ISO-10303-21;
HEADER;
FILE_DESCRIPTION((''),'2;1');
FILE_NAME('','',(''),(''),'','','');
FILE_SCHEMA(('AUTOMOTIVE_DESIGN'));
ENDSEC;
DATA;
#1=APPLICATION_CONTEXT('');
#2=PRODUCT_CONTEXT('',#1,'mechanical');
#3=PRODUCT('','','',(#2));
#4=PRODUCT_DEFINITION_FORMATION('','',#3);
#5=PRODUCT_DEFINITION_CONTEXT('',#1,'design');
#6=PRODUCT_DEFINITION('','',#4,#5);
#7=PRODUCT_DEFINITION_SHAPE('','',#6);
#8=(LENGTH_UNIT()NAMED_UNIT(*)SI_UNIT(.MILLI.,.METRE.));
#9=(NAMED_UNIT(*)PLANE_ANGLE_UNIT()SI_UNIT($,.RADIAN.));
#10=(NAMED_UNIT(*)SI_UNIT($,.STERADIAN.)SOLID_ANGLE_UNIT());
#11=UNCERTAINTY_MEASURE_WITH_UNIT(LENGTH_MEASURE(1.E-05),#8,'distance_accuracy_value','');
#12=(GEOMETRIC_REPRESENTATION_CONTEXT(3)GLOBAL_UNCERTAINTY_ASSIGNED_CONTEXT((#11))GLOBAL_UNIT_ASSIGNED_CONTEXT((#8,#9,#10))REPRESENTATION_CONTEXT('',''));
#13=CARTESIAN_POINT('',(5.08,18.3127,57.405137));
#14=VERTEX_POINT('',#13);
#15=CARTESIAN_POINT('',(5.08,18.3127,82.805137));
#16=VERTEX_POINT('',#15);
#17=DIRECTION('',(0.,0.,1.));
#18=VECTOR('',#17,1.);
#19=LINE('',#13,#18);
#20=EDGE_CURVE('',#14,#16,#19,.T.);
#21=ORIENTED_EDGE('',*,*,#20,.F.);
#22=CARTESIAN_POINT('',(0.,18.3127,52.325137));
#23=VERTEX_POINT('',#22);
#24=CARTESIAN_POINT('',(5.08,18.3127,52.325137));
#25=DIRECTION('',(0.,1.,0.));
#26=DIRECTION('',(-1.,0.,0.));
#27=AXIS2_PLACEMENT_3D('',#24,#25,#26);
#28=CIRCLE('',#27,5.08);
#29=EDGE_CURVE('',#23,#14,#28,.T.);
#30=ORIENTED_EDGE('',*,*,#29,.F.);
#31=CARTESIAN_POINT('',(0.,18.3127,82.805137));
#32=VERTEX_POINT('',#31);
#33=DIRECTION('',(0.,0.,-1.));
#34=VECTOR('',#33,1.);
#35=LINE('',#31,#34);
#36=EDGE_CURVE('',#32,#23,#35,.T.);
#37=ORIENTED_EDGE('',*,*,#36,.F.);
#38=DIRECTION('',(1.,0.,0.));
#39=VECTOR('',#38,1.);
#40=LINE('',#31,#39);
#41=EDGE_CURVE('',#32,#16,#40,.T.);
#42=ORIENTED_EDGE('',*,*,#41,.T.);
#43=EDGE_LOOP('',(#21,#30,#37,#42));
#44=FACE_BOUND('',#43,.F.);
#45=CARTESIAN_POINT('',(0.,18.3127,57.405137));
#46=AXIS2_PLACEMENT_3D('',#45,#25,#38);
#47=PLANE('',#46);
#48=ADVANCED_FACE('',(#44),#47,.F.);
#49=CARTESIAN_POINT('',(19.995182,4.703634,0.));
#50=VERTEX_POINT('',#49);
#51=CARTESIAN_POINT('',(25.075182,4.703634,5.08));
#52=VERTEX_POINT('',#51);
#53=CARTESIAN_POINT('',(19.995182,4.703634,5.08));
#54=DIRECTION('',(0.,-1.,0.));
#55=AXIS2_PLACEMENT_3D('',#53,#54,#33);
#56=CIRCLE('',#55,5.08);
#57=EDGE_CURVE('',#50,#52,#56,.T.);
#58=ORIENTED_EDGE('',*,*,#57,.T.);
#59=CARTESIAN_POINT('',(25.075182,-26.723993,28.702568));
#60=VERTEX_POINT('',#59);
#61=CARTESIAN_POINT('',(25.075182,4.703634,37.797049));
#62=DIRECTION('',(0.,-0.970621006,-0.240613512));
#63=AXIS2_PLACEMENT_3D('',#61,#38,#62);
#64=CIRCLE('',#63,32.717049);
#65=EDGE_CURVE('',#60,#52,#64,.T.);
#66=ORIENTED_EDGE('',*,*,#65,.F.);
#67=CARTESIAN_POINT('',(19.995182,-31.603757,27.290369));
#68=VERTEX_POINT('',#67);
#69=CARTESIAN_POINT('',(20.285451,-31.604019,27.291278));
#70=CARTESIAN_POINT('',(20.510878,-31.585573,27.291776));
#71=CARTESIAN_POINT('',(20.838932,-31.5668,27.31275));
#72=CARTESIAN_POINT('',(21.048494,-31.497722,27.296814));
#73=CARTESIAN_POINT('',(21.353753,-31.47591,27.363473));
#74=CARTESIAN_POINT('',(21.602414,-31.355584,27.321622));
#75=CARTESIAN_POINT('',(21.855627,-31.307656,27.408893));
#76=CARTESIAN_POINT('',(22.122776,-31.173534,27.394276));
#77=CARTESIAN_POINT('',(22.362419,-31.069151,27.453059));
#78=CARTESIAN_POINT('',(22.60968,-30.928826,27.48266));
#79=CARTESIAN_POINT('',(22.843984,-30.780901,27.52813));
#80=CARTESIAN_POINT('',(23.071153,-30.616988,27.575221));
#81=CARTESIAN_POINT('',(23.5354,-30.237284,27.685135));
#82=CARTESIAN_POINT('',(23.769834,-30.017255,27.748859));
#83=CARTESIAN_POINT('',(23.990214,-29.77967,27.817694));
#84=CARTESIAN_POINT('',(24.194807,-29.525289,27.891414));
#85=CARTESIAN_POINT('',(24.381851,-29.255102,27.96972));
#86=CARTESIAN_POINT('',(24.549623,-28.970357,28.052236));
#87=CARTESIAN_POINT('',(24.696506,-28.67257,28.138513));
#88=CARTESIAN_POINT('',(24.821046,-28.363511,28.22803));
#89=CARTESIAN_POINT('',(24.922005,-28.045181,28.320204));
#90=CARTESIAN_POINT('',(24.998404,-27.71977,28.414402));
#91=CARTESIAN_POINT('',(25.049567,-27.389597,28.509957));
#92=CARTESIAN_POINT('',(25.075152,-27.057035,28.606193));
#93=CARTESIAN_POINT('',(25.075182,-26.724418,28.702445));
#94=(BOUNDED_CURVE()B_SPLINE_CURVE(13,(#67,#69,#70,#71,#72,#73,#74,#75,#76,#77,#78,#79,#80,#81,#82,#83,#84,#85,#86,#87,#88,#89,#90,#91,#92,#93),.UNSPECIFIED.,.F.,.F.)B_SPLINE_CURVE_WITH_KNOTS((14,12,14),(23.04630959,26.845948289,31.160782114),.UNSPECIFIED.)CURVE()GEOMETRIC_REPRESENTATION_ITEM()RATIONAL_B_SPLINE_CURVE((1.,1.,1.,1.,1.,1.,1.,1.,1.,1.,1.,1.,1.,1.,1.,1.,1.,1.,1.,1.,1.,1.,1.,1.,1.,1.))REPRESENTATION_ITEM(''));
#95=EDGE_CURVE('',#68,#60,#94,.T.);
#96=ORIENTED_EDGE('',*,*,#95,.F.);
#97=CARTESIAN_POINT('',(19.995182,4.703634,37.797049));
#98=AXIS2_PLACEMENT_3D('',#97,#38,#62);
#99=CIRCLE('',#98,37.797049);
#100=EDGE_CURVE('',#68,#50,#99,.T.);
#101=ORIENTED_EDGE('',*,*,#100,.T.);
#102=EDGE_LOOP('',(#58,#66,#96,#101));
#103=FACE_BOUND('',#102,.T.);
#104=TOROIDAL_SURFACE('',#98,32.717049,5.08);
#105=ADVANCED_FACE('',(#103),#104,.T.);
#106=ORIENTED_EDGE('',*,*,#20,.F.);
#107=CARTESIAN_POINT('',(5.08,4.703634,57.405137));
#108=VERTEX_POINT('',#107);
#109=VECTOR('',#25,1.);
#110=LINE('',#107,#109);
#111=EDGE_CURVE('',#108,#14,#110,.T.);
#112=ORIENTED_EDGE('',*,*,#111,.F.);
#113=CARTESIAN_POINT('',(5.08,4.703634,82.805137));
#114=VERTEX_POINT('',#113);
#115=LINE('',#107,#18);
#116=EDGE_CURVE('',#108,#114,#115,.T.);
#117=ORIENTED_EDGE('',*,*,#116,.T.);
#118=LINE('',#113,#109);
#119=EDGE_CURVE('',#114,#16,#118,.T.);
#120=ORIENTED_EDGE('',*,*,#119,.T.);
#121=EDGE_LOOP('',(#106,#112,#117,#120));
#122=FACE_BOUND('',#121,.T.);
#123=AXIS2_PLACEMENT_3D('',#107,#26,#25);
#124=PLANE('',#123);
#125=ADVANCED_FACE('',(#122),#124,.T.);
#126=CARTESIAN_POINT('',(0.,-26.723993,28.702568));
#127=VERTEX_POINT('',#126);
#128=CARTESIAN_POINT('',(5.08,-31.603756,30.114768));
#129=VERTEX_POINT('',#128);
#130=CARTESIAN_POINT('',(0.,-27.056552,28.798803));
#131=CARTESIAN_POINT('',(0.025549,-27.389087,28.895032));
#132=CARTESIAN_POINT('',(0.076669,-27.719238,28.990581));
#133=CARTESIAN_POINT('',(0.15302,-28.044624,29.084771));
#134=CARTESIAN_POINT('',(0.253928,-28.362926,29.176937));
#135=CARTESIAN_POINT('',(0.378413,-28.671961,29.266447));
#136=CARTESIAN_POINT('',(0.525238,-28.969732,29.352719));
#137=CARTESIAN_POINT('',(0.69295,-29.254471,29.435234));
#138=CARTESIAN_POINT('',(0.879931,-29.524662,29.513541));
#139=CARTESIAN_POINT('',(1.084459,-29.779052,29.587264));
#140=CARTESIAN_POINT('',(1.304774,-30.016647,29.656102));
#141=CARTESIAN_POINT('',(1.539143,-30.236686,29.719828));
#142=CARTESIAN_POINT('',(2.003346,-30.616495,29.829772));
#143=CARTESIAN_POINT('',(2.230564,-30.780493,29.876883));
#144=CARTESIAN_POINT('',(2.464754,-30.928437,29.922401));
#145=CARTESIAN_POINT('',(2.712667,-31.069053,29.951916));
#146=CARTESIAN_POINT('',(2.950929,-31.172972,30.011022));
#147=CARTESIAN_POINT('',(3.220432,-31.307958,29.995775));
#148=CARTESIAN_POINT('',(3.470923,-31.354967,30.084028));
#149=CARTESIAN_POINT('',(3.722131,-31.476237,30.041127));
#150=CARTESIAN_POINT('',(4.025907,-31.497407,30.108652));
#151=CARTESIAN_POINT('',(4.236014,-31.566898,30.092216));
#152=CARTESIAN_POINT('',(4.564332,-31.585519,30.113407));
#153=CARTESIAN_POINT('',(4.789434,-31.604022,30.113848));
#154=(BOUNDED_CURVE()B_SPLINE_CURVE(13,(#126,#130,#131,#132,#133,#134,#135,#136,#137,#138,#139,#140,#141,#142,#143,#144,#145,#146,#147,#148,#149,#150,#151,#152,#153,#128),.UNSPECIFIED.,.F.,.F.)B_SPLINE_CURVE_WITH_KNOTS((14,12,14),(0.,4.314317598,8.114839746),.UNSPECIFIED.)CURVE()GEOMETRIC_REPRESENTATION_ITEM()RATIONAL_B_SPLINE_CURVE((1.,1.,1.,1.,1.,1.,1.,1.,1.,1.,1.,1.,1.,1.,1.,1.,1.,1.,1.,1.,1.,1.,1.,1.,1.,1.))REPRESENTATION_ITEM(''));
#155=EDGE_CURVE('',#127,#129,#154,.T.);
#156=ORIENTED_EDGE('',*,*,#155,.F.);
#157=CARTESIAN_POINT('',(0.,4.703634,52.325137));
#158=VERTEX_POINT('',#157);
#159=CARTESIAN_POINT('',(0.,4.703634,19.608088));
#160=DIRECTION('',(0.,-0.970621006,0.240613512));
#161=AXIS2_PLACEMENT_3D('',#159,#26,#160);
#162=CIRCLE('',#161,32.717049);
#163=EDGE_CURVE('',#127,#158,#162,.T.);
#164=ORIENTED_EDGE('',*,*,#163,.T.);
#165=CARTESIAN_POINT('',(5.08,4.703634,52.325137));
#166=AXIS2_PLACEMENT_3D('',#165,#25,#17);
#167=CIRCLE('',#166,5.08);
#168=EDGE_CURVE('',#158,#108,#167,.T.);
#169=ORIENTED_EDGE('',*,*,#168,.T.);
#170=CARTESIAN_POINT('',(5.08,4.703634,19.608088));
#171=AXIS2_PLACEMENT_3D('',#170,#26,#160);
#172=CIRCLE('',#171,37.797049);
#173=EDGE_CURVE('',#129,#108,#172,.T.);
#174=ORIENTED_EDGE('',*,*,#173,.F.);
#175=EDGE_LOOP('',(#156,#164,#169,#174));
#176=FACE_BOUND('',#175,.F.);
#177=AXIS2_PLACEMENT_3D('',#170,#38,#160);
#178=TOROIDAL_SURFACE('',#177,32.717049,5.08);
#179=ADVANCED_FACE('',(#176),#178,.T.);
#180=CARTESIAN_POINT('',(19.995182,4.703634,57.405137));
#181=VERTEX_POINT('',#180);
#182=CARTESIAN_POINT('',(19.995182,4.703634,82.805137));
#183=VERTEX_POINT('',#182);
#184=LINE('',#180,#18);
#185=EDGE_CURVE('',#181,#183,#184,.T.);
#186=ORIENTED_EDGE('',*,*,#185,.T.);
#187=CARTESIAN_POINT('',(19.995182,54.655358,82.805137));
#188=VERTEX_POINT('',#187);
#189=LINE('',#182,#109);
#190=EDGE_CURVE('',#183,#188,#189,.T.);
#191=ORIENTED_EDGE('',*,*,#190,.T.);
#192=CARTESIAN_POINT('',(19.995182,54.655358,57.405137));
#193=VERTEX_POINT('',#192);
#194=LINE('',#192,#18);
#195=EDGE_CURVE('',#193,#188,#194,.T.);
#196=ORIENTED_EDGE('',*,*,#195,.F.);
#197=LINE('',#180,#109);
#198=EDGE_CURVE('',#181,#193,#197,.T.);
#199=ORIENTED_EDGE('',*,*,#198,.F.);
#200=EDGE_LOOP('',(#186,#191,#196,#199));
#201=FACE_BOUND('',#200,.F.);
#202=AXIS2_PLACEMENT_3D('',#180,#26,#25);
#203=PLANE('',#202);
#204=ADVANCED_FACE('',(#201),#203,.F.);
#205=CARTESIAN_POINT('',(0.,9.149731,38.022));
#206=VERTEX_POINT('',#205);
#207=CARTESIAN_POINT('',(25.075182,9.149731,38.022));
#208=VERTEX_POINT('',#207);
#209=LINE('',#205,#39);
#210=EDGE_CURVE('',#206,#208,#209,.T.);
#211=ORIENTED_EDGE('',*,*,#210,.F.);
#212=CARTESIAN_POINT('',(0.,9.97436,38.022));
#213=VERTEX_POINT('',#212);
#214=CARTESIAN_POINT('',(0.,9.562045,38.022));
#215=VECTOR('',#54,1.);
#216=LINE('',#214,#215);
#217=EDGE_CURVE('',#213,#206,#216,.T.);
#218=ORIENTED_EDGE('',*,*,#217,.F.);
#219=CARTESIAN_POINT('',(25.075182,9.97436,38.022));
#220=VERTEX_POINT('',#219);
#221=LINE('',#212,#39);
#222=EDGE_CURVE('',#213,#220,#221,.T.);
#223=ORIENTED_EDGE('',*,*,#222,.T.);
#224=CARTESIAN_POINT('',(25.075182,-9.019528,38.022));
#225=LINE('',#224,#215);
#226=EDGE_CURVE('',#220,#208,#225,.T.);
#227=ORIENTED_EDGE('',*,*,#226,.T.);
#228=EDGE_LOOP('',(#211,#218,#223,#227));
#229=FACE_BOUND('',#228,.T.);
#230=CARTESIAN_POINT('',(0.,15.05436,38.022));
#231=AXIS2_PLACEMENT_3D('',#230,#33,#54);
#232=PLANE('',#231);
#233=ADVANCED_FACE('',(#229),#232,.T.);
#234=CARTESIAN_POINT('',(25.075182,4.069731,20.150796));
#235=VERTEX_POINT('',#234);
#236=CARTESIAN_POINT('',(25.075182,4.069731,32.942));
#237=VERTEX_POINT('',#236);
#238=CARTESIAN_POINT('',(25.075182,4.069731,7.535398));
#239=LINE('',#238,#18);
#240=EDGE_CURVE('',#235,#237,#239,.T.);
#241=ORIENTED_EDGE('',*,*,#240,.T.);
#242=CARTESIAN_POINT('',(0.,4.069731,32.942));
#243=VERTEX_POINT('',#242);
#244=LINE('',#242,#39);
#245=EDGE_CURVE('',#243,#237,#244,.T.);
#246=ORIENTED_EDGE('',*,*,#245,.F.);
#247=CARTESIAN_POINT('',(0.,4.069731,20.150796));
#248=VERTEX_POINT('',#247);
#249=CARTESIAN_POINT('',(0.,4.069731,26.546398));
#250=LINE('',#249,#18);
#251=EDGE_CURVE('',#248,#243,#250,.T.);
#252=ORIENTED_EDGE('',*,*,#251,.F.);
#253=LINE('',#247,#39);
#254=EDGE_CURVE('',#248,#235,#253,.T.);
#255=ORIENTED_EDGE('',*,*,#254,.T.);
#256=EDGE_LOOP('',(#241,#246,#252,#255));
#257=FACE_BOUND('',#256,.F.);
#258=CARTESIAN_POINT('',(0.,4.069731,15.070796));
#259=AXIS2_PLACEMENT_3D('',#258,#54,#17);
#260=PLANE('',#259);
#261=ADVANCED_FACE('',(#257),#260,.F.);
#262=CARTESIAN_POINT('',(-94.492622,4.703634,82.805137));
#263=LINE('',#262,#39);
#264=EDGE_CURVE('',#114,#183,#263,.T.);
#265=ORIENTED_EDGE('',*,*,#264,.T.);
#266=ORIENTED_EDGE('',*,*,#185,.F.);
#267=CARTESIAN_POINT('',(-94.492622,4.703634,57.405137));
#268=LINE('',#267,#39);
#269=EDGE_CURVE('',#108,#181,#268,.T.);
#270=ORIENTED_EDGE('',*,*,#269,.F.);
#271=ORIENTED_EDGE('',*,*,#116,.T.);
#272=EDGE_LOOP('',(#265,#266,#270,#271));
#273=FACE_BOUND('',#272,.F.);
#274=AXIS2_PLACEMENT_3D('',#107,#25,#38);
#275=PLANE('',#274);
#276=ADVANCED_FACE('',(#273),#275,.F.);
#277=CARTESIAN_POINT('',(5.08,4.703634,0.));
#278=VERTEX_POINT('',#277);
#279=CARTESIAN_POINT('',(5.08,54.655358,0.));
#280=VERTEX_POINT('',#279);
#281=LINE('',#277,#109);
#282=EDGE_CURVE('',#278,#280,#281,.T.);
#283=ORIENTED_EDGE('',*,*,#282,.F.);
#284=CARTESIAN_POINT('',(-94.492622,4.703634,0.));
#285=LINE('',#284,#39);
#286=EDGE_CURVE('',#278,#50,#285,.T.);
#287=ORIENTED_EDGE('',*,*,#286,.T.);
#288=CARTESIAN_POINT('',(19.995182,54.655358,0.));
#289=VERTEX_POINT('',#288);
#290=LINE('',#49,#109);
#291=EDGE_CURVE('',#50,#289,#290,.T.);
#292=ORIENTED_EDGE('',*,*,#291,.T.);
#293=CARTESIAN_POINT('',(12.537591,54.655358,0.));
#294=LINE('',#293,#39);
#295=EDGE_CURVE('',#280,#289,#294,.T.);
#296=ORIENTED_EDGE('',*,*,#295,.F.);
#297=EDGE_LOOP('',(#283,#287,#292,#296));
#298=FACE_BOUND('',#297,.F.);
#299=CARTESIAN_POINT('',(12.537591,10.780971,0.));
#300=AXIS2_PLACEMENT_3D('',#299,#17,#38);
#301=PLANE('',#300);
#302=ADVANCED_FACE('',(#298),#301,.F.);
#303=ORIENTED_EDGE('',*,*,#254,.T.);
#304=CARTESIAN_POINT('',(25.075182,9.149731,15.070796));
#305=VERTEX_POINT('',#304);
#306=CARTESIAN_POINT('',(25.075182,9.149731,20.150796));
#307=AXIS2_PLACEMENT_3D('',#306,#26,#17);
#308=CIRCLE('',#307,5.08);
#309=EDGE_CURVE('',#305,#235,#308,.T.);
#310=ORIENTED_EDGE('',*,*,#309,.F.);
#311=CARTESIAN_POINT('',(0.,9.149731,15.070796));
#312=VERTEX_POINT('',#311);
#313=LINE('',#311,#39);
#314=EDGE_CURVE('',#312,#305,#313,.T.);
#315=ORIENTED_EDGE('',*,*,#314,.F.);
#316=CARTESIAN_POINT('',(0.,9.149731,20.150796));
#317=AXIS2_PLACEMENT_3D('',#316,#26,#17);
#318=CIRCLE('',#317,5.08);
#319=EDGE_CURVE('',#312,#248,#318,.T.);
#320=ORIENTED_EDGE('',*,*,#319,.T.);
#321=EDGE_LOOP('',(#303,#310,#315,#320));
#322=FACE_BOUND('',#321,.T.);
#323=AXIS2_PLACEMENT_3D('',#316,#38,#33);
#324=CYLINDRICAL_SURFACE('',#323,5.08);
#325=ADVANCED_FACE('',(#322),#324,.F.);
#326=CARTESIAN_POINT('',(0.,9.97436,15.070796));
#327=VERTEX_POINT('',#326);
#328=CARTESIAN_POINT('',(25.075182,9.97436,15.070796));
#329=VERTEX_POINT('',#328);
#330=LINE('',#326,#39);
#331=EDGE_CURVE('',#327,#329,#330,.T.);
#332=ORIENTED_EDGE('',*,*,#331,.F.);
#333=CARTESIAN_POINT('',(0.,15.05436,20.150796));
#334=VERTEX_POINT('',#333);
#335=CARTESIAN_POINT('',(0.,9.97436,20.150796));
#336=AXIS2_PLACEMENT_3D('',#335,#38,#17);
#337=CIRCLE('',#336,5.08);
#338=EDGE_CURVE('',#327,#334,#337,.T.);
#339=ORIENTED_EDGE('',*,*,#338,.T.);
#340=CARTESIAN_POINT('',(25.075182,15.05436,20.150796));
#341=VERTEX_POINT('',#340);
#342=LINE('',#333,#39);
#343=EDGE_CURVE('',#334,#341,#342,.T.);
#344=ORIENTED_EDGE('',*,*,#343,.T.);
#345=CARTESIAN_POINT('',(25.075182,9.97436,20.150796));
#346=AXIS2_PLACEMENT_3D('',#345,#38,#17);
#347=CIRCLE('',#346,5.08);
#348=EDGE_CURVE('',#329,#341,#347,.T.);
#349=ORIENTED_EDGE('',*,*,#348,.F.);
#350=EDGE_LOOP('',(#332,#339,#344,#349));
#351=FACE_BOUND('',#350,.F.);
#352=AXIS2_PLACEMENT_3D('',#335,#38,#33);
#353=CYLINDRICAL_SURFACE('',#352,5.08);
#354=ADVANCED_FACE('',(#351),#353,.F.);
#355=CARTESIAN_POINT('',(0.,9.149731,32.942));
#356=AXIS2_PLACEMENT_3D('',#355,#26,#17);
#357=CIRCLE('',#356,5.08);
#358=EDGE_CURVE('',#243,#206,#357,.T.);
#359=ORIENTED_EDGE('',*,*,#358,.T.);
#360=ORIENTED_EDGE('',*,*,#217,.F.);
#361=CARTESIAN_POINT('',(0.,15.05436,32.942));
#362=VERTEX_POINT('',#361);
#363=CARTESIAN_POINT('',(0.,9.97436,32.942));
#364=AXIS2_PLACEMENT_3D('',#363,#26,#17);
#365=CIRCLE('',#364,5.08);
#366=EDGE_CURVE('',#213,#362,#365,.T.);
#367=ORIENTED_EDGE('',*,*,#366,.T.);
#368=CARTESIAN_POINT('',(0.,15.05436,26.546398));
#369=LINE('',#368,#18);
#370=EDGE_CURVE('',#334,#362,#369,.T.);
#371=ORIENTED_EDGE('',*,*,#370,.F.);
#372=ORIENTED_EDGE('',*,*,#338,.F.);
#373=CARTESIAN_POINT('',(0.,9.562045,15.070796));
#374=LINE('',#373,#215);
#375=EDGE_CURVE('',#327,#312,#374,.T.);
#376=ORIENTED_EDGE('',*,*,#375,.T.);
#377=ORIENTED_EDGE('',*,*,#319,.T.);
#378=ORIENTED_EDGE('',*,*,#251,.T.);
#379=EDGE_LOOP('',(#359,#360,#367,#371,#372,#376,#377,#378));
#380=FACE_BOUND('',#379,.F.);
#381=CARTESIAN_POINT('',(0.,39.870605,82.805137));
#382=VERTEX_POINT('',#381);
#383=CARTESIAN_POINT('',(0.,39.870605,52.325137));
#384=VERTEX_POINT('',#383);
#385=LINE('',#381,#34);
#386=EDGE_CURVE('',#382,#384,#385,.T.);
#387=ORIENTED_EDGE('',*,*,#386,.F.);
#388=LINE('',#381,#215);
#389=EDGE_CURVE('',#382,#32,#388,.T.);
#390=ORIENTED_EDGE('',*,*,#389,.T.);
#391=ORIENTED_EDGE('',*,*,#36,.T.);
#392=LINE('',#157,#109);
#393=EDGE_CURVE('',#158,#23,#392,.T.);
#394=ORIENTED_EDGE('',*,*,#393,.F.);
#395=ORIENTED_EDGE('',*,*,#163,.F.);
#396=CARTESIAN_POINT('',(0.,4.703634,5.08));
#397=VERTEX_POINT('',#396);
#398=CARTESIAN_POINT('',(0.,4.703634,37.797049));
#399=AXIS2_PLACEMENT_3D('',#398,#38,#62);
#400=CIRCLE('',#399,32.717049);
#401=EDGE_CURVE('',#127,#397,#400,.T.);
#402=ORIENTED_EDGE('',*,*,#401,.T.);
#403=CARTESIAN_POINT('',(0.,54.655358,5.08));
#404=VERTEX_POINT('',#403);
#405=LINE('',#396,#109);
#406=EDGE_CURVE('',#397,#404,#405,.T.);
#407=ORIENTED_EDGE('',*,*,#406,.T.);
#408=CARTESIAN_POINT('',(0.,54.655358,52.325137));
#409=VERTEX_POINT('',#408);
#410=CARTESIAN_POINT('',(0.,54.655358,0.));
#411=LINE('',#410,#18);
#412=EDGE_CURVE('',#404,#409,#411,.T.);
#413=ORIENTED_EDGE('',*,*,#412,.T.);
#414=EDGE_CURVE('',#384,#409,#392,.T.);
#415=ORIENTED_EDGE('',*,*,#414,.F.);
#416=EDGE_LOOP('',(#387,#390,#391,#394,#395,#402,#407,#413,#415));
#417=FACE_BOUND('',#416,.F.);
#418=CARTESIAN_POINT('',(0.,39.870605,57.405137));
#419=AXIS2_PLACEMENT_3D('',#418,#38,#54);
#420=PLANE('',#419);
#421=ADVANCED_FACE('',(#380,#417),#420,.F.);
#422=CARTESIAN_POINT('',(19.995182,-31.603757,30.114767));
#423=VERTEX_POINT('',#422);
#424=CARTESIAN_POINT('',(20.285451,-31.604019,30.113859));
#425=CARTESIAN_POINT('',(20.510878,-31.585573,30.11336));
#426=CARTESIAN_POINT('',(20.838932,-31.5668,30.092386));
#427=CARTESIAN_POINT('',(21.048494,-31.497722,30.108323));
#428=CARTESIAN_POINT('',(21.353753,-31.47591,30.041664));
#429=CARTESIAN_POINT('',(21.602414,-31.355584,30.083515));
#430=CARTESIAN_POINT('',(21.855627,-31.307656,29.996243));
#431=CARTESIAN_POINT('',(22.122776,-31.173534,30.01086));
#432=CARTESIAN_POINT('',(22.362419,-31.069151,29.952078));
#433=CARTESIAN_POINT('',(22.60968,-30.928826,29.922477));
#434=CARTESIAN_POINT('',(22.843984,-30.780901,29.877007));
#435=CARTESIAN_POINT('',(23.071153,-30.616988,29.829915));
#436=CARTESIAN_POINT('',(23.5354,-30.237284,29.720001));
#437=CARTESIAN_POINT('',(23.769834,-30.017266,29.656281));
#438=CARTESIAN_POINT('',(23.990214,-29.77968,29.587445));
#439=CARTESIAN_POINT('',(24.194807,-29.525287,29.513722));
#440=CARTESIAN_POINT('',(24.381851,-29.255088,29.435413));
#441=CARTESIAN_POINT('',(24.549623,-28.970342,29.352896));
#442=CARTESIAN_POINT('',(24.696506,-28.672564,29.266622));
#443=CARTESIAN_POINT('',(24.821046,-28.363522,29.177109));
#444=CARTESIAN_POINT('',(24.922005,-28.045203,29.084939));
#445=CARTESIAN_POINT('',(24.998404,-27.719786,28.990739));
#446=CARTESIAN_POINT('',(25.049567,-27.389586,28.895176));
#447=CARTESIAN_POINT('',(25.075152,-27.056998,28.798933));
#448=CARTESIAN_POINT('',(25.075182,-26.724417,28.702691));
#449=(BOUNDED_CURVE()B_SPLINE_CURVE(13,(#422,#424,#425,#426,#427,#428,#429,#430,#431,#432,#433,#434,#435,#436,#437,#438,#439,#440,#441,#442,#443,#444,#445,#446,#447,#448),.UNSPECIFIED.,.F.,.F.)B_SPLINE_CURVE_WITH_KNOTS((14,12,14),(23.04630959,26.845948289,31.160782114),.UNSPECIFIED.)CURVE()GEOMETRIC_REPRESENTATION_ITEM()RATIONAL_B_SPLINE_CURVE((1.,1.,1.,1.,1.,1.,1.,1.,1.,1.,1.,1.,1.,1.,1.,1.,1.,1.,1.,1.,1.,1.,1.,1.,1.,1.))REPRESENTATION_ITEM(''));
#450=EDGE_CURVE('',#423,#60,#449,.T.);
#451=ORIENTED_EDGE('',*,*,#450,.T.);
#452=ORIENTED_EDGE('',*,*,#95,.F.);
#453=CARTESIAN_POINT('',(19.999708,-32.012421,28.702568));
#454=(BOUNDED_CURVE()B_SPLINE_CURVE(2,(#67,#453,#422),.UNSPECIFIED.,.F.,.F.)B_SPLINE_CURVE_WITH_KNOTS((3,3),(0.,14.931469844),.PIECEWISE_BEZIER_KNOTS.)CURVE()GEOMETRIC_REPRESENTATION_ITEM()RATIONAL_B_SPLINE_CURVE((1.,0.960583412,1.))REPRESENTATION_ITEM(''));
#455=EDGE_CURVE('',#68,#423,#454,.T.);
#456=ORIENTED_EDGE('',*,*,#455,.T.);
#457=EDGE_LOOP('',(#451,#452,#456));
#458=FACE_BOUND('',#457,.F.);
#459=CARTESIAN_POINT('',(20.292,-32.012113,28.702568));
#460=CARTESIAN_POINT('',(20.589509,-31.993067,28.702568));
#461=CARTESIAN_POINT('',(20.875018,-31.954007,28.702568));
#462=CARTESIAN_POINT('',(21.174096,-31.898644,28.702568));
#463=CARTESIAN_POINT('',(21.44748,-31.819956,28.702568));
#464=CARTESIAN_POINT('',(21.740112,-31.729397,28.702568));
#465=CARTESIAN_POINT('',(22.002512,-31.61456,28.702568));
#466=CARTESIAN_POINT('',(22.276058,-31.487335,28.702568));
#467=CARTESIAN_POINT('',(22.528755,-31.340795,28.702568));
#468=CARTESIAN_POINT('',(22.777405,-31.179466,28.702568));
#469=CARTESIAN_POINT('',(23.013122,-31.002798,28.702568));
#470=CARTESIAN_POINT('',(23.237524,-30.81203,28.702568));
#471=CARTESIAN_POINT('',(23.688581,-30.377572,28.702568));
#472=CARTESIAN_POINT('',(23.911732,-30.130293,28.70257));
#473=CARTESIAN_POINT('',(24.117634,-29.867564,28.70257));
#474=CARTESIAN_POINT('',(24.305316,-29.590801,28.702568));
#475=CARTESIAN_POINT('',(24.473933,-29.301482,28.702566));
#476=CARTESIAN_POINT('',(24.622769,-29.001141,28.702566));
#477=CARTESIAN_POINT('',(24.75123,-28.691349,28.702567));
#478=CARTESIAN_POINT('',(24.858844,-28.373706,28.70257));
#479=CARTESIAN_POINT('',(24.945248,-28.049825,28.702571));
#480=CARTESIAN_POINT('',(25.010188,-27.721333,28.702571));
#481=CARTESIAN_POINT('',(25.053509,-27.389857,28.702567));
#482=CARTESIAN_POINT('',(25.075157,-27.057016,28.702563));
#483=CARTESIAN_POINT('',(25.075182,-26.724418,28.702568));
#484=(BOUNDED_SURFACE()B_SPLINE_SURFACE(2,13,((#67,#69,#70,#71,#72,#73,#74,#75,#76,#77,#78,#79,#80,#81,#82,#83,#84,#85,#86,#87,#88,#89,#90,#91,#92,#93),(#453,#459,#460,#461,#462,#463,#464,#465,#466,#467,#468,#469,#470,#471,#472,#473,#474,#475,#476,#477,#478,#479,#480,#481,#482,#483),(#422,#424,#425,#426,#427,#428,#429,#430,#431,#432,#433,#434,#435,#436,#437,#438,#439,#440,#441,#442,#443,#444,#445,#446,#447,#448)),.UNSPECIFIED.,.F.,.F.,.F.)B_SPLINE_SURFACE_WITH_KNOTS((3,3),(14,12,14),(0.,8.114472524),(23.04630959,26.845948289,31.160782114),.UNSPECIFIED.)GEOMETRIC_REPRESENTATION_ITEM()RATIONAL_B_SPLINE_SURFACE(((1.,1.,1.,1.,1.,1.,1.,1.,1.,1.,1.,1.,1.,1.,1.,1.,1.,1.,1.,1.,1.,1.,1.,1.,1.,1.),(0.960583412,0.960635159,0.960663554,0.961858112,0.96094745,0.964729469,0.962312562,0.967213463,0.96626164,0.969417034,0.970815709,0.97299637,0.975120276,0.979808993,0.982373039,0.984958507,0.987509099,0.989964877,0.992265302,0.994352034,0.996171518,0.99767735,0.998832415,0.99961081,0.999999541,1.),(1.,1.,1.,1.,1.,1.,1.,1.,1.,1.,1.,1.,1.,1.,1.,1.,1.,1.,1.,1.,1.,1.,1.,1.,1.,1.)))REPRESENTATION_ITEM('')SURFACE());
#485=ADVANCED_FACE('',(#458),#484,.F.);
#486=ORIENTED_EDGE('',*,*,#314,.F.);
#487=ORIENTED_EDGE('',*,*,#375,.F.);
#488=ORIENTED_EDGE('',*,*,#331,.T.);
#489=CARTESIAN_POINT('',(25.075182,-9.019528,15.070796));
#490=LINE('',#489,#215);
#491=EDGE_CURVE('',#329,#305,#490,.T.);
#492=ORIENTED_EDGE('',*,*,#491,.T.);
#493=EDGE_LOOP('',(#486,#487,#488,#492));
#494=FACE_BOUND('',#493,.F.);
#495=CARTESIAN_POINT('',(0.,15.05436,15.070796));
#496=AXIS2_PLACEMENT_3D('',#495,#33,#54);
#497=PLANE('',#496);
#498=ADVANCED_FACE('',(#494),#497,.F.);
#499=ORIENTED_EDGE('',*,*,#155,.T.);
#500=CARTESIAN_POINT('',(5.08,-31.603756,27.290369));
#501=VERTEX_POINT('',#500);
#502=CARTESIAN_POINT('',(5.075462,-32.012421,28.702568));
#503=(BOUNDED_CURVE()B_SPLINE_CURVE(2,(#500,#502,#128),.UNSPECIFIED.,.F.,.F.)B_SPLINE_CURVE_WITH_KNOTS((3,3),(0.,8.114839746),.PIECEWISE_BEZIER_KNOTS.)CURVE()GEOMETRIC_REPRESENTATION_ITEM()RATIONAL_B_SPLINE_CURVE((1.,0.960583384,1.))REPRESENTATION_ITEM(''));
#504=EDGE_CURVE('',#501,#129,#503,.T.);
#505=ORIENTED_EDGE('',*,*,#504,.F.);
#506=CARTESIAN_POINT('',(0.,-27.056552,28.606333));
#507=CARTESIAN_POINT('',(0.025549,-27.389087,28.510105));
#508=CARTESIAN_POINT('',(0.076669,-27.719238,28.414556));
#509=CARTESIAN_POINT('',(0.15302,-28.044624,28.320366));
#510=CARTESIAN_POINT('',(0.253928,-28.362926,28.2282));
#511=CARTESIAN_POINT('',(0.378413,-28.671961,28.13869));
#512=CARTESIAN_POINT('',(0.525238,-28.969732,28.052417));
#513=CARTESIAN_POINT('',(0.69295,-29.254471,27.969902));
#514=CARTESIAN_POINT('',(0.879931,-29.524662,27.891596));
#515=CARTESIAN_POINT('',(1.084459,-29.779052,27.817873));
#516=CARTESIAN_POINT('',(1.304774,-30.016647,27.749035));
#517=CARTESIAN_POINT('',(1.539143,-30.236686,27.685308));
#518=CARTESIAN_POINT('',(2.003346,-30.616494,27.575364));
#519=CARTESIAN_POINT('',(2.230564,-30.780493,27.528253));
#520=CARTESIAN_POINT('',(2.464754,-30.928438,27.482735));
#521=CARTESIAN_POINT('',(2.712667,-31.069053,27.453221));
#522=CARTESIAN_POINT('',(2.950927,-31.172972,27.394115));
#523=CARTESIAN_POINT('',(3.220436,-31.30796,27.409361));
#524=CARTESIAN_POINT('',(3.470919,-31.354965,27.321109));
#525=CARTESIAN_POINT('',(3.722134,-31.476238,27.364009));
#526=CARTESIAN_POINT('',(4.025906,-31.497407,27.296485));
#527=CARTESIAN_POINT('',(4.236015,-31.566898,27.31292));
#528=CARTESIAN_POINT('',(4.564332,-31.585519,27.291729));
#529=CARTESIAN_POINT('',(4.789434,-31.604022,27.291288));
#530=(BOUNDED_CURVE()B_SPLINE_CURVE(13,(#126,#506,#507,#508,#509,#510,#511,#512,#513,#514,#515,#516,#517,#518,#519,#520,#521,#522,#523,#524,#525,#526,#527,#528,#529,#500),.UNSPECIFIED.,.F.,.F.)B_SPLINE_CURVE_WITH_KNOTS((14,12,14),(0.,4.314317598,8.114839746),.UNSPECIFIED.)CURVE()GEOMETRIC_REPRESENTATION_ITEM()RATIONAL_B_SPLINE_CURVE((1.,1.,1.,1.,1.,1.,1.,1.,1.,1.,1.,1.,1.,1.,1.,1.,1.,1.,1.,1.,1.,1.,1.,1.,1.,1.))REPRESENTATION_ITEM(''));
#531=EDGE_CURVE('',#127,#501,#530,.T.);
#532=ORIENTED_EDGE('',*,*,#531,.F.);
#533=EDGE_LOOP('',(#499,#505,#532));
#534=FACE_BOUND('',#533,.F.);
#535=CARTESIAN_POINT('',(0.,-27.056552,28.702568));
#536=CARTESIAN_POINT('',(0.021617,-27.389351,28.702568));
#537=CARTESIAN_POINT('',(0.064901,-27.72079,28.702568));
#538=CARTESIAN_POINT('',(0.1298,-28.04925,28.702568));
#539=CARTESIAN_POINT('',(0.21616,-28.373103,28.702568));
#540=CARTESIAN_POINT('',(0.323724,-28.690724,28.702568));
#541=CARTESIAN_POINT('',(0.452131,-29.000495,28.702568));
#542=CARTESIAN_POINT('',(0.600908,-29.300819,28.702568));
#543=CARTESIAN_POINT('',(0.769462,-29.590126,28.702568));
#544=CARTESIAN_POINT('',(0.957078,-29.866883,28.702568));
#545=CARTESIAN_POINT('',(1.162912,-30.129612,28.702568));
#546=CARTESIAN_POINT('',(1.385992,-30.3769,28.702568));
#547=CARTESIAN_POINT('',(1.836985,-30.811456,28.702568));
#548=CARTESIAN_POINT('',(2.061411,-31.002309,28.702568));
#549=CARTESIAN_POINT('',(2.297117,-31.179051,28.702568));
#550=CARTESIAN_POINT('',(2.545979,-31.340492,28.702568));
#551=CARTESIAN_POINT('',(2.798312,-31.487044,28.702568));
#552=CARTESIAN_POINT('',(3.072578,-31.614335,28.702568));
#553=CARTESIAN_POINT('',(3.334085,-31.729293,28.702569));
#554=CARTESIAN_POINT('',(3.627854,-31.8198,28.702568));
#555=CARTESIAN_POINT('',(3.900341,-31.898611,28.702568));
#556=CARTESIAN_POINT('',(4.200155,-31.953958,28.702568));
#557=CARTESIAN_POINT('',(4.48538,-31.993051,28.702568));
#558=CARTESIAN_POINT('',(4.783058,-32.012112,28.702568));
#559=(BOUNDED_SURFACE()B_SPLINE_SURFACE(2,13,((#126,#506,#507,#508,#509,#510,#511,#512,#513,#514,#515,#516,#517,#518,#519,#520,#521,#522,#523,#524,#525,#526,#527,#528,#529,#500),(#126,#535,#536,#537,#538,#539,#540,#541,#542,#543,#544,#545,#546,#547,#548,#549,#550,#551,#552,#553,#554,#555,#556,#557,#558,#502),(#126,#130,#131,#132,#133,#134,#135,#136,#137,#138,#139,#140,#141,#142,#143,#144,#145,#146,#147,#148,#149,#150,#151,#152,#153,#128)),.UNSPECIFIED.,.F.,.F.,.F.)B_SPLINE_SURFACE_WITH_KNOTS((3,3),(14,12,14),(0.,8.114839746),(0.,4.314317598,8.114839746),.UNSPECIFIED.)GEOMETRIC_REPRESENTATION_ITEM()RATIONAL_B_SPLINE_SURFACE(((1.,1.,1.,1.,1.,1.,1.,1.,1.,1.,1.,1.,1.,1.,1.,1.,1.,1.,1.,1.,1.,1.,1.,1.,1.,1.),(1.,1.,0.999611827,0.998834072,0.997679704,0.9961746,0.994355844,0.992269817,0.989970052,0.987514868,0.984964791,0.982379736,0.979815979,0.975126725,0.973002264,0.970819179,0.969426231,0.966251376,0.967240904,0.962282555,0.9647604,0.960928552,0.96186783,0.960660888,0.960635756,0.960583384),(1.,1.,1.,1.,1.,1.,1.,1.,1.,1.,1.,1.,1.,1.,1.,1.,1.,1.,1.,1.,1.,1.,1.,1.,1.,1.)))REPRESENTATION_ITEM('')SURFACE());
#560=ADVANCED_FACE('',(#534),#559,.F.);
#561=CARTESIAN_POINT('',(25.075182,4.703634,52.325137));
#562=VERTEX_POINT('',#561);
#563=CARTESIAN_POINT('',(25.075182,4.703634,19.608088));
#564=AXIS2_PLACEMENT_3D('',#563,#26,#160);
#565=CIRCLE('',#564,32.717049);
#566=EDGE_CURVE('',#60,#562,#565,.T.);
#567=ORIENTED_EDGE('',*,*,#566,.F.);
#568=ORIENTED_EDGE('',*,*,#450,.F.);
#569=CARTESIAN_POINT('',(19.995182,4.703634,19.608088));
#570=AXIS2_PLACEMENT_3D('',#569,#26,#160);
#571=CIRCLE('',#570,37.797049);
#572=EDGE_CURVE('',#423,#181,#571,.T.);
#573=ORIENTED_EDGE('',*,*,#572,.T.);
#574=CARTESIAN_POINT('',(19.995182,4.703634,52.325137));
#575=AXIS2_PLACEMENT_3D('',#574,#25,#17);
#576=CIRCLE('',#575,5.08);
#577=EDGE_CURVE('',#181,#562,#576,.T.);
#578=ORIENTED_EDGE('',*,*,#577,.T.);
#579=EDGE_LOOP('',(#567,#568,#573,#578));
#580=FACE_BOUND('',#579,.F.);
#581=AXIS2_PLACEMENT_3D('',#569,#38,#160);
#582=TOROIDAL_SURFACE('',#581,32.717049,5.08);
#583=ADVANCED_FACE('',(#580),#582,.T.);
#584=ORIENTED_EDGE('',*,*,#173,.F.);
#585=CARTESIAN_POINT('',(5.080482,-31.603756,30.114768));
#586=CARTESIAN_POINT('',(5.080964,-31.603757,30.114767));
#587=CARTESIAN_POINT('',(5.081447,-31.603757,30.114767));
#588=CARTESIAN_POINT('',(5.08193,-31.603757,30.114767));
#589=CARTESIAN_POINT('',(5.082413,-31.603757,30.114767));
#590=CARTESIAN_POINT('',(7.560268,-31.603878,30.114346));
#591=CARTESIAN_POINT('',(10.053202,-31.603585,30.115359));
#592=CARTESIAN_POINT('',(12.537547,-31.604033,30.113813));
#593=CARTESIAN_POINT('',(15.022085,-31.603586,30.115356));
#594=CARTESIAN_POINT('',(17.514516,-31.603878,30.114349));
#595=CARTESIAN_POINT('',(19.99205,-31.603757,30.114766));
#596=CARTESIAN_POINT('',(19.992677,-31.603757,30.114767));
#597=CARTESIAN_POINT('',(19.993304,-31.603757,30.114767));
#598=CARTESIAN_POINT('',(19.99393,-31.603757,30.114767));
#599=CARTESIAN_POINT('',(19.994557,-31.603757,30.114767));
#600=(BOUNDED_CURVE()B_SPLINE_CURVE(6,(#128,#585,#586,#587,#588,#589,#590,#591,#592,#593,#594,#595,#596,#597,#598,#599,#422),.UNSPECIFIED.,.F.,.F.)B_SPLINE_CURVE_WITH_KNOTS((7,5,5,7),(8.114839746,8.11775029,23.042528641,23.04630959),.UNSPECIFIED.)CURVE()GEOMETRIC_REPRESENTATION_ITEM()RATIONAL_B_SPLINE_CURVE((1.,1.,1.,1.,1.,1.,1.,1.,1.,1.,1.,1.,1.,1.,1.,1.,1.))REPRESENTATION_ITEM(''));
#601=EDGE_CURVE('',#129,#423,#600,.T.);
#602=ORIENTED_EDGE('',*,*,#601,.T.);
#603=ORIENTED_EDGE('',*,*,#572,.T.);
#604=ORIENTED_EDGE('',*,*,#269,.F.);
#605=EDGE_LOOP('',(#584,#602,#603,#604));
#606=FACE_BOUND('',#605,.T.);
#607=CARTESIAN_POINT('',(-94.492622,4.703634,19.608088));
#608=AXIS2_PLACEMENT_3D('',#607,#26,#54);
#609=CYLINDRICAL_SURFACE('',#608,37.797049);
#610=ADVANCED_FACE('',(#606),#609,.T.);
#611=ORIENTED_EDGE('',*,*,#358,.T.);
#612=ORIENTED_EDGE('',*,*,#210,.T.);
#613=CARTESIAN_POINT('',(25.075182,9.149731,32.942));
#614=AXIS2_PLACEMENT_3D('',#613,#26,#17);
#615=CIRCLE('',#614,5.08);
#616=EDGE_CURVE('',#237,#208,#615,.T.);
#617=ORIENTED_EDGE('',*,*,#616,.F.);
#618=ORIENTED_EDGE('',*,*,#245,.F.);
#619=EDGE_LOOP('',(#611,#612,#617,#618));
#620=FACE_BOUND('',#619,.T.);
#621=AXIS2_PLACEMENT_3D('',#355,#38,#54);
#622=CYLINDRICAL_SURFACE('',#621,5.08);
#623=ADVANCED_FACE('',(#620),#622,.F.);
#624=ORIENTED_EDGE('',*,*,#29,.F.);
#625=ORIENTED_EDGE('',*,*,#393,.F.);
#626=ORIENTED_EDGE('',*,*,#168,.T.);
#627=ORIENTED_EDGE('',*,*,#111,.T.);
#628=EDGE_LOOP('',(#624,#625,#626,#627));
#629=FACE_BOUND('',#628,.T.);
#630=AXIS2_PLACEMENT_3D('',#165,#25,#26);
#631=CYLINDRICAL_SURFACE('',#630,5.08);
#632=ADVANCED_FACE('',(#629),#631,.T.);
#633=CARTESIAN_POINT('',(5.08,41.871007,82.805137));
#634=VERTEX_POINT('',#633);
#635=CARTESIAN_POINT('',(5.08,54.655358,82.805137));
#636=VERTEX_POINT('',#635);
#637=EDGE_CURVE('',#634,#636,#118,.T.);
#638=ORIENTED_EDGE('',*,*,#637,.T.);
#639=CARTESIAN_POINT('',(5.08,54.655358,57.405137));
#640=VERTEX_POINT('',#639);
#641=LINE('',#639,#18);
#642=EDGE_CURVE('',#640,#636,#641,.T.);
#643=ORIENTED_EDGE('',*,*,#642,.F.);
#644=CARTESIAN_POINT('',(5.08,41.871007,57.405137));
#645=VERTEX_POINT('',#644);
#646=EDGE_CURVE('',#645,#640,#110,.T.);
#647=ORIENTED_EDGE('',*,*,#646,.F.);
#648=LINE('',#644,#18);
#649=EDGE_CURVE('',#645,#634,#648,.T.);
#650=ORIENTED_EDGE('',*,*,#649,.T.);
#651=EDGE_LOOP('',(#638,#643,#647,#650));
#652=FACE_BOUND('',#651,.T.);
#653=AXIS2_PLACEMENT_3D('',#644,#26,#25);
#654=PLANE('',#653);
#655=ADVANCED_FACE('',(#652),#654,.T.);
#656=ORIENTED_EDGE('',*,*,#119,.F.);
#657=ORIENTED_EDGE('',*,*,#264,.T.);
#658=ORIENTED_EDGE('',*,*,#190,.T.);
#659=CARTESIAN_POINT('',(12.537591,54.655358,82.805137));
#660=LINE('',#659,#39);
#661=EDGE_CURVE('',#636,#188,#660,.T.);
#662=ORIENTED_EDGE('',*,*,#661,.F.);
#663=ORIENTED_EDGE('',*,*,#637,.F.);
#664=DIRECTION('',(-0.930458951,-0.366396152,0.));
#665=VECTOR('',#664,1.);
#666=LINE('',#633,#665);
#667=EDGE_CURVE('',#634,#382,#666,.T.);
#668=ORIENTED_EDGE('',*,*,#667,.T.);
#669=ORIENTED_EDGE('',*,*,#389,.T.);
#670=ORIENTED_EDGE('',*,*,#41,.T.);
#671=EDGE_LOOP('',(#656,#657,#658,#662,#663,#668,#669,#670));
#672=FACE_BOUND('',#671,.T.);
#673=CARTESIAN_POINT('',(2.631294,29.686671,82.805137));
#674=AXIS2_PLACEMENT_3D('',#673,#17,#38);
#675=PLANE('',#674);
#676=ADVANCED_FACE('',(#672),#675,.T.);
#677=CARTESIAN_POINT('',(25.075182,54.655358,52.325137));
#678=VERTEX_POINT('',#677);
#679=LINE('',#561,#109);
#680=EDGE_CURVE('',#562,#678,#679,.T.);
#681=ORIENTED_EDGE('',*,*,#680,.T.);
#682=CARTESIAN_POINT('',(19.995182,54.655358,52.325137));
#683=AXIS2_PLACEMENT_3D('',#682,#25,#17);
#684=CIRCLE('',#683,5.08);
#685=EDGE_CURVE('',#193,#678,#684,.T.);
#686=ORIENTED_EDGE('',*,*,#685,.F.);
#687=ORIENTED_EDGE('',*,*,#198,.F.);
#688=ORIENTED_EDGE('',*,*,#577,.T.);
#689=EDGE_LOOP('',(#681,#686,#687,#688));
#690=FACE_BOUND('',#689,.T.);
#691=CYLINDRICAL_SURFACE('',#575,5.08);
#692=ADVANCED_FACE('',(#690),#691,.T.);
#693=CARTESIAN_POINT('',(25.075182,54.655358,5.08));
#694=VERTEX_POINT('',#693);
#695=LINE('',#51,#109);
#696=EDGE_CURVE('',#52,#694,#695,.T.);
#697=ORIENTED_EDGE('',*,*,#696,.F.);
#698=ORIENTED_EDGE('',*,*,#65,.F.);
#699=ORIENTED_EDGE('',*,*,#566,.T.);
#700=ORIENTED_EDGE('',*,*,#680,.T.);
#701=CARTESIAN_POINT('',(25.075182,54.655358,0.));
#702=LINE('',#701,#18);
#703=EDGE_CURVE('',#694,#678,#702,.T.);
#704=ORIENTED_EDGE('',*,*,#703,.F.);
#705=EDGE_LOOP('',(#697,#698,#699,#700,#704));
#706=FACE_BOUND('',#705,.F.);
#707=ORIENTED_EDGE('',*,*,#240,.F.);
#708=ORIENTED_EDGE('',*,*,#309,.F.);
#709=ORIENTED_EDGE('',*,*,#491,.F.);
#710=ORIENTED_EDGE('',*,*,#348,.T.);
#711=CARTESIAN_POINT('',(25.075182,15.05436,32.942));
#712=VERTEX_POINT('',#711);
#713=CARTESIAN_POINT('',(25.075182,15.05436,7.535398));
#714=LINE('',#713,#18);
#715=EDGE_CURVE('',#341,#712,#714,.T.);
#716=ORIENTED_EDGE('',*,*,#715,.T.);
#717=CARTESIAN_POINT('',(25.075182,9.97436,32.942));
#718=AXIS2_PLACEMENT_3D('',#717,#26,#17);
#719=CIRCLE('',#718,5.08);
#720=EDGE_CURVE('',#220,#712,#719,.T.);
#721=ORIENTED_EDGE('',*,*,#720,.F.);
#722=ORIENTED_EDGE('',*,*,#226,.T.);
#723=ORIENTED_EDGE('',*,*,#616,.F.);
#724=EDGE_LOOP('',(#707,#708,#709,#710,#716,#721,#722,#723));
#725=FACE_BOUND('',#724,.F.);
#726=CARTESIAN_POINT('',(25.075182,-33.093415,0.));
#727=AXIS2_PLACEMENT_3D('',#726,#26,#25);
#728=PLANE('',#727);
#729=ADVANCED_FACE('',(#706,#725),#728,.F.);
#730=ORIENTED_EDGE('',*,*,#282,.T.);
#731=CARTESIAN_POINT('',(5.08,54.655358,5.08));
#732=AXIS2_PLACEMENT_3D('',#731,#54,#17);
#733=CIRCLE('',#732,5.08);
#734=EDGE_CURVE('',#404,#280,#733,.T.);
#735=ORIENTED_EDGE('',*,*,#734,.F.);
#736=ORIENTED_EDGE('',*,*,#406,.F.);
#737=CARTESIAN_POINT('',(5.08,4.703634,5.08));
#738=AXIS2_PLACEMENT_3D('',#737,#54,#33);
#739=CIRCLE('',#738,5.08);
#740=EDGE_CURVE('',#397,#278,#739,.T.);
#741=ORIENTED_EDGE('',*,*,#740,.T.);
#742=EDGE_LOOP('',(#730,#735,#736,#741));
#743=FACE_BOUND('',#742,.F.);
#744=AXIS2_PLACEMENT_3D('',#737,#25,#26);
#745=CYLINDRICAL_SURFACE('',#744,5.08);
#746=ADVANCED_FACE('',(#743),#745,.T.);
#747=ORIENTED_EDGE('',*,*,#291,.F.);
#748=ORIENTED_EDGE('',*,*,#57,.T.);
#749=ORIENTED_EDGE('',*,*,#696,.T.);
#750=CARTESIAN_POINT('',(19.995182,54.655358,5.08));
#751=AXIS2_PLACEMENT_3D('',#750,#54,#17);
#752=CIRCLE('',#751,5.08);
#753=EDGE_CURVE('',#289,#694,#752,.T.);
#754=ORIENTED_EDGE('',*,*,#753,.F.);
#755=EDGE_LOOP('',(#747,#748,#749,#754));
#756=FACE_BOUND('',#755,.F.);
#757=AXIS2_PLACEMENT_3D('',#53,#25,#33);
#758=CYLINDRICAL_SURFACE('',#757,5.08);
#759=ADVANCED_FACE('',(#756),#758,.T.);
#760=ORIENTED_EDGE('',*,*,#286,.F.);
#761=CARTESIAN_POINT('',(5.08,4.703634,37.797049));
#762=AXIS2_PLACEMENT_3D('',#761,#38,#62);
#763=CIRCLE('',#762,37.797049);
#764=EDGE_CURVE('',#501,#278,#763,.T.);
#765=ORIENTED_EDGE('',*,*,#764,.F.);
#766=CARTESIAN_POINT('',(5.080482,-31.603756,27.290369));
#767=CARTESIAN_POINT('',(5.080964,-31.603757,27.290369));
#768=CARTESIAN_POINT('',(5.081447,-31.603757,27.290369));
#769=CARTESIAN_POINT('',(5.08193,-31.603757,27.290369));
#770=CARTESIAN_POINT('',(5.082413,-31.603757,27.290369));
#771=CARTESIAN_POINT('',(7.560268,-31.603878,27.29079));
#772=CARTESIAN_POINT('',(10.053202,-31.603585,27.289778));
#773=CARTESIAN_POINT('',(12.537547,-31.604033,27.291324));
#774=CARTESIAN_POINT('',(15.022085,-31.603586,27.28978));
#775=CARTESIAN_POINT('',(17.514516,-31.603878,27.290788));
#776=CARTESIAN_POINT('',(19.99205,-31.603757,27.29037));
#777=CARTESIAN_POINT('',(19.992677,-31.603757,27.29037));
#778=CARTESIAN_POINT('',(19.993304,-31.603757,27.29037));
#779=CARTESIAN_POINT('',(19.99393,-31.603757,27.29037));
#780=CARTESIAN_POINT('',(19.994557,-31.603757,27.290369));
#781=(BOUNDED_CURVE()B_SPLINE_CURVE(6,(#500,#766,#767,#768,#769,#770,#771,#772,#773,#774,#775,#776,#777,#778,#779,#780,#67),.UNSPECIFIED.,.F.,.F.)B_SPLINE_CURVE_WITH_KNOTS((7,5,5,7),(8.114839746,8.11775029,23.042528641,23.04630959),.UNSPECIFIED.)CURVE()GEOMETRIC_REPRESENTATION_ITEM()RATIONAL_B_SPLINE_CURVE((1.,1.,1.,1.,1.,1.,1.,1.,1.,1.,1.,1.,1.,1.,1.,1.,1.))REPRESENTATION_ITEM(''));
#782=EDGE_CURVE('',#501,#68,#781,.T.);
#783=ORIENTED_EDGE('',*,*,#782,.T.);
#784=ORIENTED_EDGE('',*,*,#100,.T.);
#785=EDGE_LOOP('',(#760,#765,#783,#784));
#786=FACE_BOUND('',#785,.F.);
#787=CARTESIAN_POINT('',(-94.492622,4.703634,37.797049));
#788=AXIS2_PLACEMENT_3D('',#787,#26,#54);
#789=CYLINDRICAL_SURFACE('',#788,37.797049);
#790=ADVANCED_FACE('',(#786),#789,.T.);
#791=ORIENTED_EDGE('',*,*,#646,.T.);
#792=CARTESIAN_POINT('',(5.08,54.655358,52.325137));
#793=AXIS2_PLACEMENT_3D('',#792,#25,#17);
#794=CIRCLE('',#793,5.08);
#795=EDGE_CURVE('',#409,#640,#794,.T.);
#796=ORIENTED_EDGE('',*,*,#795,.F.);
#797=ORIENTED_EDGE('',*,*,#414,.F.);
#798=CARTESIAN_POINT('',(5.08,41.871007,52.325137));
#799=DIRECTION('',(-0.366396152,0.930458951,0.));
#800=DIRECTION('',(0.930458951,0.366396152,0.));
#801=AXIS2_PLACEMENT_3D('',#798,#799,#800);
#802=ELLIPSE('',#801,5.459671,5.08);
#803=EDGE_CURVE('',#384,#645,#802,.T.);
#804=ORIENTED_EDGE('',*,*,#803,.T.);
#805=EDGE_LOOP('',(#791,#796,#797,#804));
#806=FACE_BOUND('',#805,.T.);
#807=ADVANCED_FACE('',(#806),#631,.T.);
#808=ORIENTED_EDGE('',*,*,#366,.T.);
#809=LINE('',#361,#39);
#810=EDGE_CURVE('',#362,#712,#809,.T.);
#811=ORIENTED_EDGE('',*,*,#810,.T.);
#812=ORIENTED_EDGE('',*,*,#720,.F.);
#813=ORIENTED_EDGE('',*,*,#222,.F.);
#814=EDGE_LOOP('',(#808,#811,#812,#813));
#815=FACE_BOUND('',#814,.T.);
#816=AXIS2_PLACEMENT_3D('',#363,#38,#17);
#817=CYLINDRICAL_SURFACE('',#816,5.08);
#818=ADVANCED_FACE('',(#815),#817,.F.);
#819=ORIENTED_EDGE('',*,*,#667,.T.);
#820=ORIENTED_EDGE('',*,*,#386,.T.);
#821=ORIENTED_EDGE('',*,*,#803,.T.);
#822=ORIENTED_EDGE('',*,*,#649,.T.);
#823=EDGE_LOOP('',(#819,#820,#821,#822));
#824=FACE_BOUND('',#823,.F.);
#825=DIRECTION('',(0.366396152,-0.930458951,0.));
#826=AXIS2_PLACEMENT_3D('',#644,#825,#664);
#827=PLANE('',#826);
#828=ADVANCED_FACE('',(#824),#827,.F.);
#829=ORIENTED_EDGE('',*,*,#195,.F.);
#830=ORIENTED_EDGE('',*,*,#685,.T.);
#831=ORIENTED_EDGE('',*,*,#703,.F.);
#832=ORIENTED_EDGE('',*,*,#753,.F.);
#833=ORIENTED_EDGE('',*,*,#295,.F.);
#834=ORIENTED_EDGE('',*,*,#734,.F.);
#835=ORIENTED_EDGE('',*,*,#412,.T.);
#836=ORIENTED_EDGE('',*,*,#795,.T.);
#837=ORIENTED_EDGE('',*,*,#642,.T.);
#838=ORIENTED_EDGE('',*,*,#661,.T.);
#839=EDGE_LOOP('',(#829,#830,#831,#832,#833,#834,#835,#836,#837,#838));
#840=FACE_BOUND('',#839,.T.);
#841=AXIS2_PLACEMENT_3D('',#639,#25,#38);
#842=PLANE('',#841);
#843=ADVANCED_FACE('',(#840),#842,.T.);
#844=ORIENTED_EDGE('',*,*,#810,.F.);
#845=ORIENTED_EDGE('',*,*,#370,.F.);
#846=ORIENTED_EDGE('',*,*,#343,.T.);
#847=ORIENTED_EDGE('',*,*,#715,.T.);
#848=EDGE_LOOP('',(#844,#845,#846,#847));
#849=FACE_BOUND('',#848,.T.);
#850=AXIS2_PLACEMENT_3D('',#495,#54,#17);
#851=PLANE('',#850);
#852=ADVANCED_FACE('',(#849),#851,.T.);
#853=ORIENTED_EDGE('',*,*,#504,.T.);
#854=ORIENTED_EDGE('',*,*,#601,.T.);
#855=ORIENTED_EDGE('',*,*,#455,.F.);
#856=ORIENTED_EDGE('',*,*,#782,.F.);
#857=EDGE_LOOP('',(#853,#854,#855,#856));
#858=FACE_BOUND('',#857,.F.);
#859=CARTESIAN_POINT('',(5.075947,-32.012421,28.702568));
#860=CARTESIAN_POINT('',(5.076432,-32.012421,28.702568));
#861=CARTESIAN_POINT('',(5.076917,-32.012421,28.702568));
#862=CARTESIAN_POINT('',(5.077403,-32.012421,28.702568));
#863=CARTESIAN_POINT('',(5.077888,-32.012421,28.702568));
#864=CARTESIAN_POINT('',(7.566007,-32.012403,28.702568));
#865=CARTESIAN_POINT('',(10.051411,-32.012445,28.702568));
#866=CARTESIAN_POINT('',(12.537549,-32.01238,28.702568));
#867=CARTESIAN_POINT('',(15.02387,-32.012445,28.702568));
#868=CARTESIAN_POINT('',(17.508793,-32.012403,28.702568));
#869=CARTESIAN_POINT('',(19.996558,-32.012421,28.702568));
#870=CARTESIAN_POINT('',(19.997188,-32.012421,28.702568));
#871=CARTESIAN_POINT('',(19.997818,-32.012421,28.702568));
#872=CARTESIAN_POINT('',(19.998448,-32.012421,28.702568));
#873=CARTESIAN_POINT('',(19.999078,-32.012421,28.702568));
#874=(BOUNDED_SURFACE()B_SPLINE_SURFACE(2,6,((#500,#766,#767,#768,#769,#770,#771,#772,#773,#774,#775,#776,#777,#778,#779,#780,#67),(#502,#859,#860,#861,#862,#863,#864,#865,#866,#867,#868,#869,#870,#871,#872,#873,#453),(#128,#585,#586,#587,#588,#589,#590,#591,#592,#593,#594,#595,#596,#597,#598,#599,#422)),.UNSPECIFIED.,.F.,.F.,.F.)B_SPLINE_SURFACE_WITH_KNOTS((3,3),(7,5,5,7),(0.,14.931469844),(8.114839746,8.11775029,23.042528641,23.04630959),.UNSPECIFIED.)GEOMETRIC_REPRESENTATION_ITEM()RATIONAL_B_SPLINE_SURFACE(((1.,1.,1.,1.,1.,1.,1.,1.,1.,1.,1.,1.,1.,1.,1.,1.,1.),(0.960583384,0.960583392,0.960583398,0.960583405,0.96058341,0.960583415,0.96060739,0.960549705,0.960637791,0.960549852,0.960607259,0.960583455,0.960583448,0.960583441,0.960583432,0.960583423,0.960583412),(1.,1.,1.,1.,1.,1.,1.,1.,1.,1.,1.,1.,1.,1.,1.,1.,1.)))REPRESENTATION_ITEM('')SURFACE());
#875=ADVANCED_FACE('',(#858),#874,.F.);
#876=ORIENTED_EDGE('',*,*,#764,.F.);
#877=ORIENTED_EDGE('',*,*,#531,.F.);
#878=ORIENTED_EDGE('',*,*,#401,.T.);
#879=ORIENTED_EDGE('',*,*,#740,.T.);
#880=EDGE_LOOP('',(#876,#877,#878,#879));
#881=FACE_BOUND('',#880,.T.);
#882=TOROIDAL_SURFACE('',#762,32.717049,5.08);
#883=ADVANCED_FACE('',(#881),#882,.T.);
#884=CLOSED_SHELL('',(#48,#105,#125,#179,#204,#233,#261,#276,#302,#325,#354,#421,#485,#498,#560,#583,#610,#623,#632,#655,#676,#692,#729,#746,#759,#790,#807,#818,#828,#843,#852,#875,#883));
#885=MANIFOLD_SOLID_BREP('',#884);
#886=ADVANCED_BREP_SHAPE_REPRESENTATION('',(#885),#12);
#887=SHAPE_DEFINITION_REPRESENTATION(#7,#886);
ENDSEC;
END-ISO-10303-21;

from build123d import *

# Parameters (mm, degrees)
F0_W        = 25.0751823187
F0_H        = 87.748773396
F1_DEPTH    = 57.4051365256
F2_T1_DEPTH = 214.0604270912
F3_R        = 5.08
F4_R        = 5.08
F5_W        = 10.9846293926
F5_H        = 22.9512043297
F6_DEPTH    = 76.7630785704
F7_R        = 5.08
F9_DEPTH    = 36.4525131881
F10_DEPTH   = 25.4


# Not quite as in the source:
# - a fillet or chamfer that OpenCascade refuses, or shapes differently, is made with other operations: its cross-section is extruded or revolved along the edge and cut away or added


with BuildPart() as f1:
    # F0 (on Top) → F1 (new body)
    with BuildSketch(Plane.XY):
        with Locations((12.5375911593, 10.7809714973)):
            Rectangle(F0_W, F0_H)
    extrude(amount=F1_DEPTH)

    # F2: fillet of radius 37.7970489545 on 2 edges, made by hand

    # F2_s2 → F2_t1 (cut)
    with BuildSketch(Plane.YZ.offset(-94.4926223863)):
        with BuildLine():
            ThreePointArc((-33.0934152007, 19.6080875711), (-22.0229158708, 46.3346371957), (4.7036337538, 57.4051365256))
            Line((4.7036337538, 57.4051365256), (-33.0934152007, 57.4051365256))
            Line((-33.0934152007, 57.4051365256), (-33.0934152007, 19.6080875711))
        make_face()
        with BuildLine():
            ThreePointArc((-33.0934152007, 37.7970489545), (-22.0229158708, 11.0704993299), (4.7036337538, 0))
            Line((4.7036337538, 0), (-33.0934152007, 0))
            Line((-33.0934152007, 0), (-33.0934152007, 37.7970489545))
        make_face()
    extrude(amount=F2_T1_DEPTH, mode=Mode.SUBTRACT)

    # F3
    f3_edges = [f1.edges().sort_by_distance(p)[0] for p in [
        (0, 29.679496, 0),
        (0, -18.586626, 8.028261),
        (25.075182, 29.679496, 57.405137),
        (25.075182, -18.586626, 49.376875),
        (25.075182, 29.679496, 0),
        (25.075182, -18.586626, 8.028261),
        (0, -18.586626, 49.376875),
        (0, 29.679496, 57.405137),
    ]]
    fillet(f3_edges, radius=F3_R)

    # F4
    f4_edges = [f1.edges().sort_by_distance(p)[0] for p in [
        (12.537591, -31.982976, 28.702568),
    ]]
    fillet(f4_edges, radius=F4_R)

    # F5 (on face) → F6 (cut)
    with BuildSketch(Plane(origin=(0, 0, 0), x_dir=(0, -1, 0), z_dir=(-1, 0, 0))):
        with Locations((-9.5620453358, 26.5463981777)):
            Rectangle(F5_W, F5_H)
    extrude(amount=-F6_DEPTH, mode=Mode.SUBTRACT)

    # F7
    f7_edges = [f1.edges().sort_by_distance(p)[0] for p in [
        (12.537591, 4.069731, 38.022),
        (12.537591, 4.069731, 15.070796),
        (12.537591, 15.05436, 15.070796),
        (12.537591, 15.05436, 38.022),
    ]]
    fillet(f7_edges, radius=F7_R)

    # F8 (on face) → F9 (join)
    with BuildSketch(Plane.XY.offset(57.4051365256)):
        Polygon((0, 18.3127000928), (5.08, 18.3127000928), (5.08, 41.8710074145), (0, 39.8706048727), align=None)
    extrude(amount=-F9_DEPTH)

    # F10 (add): a face of the model
    f10_faces = [f1.faces().sort_by_distance(p)[0] for p in [
        (11.2098476386, 29.6687845578, 57.4051365256),
    ]]
    extrude(f10_faces, amount=F10_DEPTH)


solid = f1.part
